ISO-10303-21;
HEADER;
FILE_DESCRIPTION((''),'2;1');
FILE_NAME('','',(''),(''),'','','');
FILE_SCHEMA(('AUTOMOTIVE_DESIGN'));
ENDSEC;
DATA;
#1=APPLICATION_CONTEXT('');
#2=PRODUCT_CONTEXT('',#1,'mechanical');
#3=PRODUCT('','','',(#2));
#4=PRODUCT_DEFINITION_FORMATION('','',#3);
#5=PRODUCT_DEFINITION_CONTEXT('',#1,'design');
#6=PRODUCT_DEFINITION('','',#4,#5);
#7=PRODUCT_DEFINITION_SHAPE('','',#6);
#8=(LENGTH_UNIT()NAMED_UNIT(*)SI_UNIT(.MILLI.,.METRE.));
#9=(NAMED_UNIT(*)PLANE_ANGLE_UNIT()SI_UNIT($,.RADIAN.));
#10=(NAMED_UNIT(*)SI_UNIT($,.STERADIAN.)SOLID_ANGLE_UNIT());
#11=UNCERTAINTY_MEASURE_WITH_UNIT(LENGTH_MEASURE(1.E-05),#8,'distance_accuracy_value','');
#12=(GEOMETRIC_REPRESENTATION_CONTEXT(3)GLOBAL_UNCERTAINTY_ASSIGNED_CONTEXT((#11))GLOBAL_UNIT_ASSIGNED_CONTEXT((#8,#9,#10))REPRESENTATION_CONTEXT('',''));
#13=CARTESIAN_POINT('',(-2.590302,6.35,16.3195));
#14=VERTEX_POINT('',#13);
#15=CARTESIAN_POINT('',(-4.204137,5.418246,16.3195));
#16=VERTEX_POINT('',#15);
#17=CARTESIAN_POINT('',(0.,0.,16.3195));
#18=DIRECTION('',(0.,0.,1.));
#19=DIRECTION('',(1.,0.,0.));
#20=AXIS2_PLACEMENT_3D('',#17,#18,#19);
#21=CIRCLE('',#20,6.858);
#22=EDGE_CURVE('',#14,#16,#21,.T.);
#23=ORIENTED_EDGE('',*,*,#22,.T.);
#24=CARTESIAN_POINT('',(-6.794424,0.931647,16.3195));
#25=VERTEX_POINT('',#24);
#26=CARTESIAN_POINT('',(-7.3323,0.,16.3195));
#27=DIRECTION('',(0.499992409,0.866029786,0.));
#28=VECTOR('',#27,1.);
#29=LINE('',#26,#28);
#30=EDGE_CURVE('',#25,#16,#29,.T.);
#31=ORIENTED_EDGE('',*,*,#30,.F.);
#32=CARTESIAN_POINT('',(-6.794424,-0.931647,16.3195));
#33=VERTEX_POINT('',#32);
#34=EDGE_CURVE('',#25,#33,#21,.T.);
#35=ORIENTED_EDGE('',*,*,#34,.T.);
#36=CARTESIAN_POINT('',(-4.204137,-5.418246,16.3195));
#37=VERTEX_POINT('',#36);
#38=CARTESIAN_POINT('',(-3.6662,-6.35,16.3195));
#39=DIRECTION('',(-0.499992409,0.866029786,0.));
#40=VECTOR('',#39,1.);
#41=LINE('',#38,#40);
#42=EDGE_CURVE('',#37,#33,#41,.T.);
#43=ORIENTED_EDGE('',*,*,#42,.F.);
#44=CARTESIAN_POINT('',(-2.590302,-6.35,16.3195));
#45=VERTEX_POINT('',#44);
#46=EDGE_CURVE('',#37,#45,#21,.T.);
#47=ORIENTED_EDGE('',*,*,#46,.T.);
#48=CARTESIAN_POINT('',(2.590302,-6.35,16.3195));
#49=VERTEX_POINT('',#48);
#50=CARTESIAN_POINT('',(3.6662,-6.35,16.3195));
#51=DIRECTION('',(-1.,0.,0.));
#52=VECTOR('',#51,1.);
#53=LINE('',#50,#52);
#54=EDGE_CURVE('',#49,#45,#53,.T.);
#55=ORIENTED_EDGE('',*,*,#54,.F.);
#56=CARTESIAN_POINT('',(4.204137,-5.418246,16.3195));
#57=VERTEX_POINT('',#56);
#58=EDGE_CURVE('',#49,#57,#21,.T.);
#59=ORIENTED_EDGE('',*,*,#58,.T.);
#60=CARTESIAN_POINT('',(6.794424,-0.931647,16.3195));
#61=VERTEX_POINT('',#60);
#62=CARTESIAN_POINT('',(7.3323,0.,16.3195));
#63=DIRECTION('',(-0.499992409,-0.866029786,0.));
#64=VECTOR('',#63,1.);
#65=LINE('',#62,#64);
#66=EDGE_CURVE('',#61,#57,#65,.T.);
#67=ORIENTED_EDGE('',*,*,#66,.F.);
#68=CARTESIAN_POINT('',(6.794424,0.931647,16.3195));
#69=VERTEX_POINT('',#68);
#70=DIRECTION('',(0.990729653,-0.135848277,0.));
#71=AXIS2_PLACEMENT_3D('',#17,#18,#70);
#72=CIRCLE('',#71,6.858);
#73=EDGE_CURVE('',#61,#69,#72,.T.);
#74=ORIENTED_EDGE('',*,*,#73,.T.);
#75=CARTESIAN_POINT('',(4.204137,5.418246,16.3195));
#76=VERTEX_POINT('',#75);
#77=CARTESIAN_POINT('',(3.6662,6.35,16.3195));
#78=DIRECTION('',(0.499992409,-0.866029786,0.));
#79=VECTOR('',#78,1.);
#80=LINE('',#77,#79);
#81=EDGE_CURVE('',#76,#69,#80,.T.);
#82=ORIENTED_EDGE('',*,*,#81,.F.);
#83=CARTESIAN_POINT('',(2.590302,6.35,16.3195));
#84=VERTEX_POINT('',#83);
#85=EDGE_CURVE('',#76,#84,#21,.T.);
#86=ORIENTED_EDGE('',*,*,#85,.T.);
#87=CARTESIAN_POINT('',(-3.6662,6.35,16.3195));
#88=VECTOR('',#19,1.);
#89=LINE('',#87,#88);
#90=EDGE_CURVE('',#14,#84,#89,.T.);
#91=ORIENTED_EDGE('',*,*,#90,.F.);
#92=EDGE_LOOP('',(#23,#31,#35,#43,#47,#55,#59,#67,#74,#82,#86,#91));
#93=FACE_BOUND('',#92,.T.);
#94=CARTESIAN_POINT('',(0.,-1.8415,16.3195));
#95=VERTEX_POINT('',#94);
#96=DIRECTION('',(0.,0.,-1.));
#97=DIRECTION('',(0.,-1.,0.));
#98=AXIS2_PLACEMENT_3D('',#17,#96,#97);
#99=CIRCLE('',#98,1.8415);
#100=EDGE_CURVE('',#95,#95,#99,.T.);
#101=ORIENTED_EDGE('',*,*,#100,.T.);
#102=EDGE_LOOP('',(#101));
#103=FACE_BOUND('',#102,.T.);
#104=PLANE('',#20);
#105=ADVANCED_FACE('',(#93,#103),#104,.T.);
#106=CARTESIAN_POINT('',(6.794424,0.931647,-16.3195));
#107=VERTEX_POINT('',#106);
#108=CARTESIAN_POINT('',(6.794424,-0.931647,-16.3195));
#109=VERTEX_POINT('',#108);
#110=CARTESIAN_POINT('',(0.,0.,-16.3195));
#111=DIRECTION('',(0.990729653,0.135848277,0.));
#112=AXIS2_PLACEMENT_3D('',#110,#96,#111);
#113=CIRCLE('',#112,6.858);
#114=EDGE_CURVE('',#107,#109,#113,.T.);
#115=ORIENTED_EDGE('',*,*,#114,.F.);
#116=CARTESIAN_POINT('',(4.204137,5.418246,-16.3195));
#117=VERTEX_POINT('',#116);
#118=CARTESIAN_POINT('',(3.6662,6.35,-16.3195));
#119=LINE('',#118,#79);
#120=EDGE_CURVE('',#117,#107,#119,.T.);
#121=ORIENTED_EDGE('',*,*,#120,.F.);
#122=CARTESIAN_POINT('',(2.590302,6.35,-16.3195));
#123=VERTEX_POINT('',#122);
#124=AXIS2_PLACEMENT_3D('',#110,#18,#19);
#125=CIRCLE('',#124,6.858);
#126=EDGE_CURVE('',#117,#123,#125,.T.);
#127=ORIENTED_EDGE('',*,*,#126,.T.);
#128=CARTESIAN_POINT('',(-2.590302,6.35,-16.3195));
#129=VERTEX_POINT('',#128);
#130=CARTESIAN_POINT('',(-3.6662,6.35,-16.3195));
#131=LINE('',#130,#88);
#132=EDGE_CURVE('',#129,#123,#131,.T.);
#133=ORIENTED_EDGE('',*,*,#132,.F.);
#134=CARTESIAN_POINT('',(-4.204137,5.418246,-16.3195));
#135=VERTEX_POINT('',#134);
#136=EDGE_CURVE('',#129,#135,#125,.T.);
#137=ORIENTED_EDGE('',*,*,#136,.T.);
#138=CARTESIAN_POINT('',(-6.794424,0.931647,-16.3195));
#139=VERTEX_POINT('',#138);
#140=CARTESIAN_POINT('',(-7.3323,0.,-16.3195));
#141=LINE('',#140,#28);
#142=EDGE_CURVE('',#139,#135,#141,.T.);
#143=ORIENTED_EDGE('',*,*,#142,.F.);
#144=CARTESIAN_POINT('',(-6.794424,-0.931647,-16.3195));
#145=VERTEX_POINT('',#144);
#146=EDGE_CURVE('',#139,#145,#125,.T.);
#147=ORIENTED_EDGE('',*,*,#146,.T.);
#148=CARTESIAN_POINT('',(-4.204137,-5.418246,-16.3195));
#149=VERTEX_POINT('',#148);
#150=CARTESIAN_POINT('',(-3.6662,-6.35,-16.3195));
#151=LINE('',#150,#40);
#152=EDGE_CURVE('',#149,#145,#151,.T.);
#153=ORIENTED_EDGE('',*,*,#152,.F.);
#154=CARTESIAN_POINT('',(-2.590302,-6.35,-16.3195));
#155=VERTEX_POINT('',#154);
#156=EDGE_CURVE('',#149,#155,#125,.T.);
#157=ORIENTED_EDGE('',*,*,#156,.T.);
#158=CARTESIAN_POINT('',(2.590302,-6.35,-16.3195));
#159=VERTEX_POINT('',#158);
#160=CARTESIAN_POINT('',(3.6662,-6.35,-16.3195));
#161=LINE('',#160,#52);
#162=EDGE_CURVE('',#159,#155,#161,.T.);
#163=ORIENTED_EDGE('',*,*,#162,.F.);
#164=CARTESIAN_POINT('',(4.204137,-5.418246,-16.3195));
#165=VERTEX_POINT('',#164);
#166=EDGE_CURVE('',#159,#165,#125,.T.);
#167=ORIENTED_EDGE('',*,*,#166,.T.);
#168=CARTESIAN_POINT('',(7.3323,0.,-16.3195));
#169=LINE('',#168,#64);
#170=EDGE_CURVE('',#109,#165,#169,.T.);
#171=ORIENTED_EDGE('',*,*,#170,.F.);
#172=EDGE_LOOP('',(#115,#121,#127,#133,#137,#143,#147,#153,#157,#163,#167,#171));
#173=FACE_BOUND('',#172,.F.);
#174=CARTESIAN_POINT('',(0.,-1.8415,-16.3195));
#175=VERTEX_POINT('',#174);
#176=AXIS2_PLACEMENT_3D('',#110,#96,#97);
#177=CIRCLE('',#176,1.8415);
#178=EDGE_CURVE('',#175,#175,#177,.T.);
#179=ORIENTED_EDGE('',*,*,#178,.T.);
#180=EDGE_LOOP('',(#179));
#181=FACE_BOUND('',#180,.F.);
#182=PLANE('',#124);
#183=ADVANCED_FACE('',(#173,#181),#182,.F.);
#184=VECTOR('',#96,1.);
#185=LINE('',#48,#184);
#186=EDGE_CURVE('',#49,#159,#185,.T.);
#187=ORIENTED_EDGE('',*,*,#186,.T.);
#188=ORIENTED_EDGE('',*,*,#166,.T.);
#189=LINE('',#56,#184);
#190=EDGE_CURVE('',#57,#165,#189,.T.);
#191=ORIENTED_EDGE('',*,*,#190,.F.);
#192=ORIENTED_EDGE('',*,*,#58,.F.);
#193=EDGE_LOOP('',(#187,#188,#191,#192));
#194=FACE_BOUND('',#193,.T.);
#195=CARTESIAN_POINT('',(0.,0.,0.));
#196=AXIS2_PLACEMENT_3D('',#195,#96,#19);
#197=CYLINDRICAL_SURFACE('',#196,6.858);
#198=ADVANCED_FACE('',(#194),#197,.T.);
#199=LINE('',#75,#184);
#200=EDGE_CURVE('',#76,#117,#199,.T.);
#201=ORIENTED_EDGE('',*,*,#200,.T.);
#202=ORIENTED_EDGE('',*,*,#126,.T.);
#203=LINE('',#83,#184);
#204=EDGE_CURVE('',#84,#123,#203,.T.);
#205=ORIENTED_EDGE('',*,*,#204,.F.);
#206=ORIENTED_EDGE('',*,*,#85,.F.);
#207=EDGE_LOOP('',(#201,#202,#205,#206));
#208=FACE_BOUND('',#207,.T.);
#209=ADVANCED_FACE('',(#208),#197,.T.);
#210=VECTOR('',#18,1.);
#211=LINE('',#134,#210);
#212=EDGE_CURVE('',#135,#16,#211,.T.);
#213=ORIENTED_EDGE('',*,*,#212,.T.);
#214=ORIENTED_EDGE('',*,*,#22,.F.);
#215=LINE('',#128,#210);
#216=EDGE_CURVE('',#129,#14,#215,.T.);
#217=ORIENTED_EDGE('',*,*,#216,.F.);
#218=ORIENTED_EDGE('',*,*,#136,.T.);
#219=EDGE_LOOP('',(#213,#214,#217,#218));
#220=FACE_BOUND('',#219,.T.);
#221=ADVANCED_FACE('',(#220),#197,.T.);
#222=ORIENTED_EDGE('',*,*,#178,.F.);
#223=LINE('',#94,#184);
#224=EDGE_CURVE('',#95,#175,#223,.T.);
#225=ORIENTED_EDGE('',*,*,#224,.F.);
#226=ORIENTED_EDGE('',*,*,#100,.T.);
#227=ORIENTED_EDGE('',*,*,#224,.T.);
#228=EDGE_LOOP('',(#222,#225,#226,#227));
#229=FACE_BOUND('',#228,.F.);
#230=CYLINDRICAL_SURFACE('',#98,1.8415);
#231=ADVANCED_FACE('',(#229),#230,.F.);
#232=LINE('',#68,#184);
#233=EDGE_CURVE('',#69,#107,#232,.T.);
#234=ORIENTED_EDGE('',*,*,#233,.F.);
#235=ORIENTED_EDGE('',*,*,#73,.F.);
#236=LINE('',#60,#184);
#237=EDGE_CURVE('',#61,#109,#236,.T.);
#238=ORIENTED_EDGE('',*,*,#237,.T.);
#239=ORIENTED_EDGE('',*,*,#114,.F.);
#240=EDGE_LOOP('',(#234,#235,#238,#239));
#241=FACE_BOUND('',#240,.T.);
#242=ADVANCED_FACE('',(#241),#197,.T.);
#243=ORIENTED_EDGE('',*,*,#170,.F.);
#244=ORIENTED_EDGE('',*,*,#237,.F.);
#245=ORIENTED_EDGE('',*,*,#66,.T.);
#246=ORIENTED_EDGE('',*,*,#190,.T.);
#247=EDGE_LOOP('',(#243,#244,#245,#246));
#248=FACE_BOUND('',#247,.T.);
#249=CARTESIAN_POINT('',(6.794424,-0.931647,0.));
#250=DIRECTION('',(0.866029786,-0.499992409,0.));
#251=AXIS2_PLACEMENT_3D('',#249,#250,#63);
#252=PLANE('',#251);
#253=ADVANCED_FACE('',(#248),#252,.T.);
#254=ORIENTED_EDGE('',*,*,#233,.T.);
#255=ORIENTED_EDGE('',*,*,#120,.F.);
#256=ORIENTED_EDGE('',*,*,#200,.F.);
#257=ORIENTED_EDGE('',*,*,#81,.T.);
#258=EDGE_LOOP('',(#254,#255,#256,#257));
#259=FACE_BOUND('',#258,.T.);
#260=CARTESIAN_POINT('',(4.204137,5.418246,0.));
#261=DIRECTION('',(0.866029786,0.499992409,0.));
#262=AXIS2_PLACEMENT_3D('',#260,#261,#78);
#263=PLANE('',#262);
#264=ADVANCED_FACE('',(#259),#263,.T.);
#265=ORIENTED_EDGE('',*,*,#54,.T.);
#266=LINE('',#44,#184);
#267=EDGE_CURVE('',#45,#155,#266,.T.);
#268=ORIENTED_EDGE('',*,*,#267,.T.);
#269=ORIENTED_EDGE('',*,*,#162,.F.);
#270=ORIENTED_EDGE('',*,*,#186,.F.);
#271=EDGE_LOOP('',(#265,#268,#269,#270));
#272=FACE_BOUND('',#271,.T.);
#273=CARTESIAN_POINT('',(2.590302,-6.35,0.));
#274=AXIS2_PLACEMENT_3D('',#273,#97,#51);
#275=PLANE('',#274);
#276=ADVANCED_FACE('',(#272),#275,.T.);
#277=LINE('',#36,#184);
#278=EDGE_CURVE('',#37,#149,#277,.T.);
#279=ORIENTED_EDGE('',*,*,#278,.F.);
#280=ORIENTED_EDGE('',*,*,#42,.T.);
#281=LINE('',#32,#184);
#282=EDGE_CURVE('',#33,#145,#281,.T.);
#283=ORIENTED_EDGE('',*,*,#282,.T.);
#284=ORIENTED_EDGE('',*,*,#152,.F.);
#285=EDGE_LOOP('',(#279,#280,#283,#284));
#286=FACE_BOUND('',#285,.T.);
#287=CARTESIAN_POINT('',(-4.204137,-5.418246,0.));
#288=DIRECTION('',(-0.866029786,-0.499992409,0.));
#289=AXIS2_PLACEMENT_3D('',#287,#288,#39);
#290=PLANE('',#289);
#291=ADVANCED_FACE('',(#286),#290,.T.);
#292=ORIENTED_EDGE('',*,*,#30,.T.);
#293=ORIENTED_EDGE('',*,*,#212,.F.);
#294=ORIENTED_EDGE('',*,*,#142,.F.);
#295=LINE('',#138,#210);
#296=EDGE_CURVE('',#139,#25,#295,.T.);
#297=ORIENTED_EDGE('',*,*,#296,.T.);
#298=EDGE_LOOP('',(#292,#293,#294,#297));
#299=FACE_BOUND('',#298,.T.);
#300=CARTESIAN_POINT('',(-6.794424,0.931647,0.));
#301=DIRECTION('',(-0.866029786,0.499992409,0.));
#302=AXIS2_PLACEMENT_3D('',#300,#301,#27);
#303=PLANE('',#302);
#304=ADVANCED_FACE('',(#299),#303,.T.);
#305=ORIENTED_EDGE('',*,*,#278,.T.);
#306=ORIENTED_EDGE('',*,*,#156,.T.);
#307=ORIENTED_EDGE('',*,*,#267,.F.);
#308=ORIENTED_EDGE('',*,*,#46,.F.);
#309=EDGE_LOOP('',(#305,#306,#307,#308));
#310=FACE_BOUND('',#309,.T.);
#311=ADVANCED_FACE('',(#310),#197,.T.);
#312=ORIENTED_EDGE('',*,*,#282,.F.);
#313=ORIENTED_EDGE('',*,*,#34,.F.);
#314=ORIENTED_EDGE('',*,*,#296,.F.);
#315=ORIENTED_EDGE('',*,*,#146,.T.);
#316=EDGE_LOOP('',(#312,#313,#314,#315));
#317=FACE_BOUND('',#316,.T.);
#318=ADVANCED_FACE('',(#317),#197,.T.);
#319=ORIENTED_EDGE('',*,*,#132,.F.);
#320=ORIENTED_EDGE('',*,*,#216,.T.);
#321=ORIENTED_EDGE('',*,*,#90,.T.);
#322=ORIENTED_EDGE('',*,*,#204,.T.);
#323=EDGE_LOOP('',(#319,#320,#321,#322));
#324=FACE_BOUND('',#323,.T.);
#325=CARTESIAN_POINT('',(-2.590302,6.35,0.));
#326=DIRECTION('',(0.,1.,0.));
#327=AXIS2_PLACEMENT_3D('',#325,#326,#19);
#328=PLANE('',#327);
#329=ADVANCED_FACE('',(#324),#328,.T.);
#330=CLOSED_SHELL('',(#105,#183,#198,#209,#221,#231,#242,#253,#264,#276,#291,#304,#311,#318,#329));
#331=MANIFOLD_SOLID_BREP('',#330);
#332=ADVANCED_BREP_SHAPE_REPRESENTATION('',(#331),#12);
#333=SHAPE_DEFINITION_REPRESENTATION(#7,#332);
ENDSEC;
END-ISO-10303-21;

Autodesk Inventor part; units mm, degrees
ref_plane "YZ Plane" through (0, 0, 0) normal (1, 0, 0) x (0, 1, 0)
ref_plane "XZ Plane" through (0, 0, 0) normal (0, 1, 0) x (-1, 0, 0)
ref_plane "XY Plane" through (0, 0, 0) normal (0, 0, 1) x (1, 0, 0)
sketch "Sketch1" plane through (0, 0, 0) normal (0, 0, 1) x (1, 0, 0)
  line L0 (-3.6662, 6.35) -> (3.6662, 6.35)
  line L1 (3.6662, 6.35) -> (7.3323, 0)
  line L2 (7.3323, 0) -> (3.6662, -6.35)
  line L3 (3.6662, -6.35) -> (-3.6662, -6.35)
  line L4 (-3.6662, -6.35) -> (-7.3323, 0)
  line L5 (-7.3323, 0) -> (-3.6662, 6.35)
  circle A0 centre (0, 0) radius 6.858
  point P0 (2.5903, -6.35)
  point P1 (4.2041, -5.4183)
  point P2 (6.7944, -0.9317)
  point P3 (6.7944, 0.9317)
  point P4 (4.2041, 5.4183)
  point P5 (2.5903, 6.35)
  point P6 (-2.5903, 6.35)
  point P7 (-4.2041, 5.4183)
  point P8 (-6.7944, 0.9317)
  point P9 (-6.7944, -0.9317)
  point P10 (-4.2041, -5.4183)
  point P11 (-2.5903, -6.35)
  dimension "d0" = 12.7
  dimension "d1" = 13.716
extrude "Extrusion1" add sketch "Sketch1" along normal mid plane 32.639 contours L0 A0 L1 L2 L3 L4 L5
sketch "Sketch2" plane through (0, 0, 16.3195) normal (0, 0, 1) x (1, 0, 0)
  point P0 (0, 0)
hole "Hole1" at (0, 0, 16.3195) direction (0, 0, -1) diameter 3.683 end through all thread size "10-24 UNC" class "2B" standard "ANSI Unified Screw Threads"
mirror "Mirror1" about plane through (0, 0, 0) normal (0, 0, 1) of "Hole1"
properties part number "PINION_SHAFT_INTAKE" material "Aluminum, 7075-T6"
